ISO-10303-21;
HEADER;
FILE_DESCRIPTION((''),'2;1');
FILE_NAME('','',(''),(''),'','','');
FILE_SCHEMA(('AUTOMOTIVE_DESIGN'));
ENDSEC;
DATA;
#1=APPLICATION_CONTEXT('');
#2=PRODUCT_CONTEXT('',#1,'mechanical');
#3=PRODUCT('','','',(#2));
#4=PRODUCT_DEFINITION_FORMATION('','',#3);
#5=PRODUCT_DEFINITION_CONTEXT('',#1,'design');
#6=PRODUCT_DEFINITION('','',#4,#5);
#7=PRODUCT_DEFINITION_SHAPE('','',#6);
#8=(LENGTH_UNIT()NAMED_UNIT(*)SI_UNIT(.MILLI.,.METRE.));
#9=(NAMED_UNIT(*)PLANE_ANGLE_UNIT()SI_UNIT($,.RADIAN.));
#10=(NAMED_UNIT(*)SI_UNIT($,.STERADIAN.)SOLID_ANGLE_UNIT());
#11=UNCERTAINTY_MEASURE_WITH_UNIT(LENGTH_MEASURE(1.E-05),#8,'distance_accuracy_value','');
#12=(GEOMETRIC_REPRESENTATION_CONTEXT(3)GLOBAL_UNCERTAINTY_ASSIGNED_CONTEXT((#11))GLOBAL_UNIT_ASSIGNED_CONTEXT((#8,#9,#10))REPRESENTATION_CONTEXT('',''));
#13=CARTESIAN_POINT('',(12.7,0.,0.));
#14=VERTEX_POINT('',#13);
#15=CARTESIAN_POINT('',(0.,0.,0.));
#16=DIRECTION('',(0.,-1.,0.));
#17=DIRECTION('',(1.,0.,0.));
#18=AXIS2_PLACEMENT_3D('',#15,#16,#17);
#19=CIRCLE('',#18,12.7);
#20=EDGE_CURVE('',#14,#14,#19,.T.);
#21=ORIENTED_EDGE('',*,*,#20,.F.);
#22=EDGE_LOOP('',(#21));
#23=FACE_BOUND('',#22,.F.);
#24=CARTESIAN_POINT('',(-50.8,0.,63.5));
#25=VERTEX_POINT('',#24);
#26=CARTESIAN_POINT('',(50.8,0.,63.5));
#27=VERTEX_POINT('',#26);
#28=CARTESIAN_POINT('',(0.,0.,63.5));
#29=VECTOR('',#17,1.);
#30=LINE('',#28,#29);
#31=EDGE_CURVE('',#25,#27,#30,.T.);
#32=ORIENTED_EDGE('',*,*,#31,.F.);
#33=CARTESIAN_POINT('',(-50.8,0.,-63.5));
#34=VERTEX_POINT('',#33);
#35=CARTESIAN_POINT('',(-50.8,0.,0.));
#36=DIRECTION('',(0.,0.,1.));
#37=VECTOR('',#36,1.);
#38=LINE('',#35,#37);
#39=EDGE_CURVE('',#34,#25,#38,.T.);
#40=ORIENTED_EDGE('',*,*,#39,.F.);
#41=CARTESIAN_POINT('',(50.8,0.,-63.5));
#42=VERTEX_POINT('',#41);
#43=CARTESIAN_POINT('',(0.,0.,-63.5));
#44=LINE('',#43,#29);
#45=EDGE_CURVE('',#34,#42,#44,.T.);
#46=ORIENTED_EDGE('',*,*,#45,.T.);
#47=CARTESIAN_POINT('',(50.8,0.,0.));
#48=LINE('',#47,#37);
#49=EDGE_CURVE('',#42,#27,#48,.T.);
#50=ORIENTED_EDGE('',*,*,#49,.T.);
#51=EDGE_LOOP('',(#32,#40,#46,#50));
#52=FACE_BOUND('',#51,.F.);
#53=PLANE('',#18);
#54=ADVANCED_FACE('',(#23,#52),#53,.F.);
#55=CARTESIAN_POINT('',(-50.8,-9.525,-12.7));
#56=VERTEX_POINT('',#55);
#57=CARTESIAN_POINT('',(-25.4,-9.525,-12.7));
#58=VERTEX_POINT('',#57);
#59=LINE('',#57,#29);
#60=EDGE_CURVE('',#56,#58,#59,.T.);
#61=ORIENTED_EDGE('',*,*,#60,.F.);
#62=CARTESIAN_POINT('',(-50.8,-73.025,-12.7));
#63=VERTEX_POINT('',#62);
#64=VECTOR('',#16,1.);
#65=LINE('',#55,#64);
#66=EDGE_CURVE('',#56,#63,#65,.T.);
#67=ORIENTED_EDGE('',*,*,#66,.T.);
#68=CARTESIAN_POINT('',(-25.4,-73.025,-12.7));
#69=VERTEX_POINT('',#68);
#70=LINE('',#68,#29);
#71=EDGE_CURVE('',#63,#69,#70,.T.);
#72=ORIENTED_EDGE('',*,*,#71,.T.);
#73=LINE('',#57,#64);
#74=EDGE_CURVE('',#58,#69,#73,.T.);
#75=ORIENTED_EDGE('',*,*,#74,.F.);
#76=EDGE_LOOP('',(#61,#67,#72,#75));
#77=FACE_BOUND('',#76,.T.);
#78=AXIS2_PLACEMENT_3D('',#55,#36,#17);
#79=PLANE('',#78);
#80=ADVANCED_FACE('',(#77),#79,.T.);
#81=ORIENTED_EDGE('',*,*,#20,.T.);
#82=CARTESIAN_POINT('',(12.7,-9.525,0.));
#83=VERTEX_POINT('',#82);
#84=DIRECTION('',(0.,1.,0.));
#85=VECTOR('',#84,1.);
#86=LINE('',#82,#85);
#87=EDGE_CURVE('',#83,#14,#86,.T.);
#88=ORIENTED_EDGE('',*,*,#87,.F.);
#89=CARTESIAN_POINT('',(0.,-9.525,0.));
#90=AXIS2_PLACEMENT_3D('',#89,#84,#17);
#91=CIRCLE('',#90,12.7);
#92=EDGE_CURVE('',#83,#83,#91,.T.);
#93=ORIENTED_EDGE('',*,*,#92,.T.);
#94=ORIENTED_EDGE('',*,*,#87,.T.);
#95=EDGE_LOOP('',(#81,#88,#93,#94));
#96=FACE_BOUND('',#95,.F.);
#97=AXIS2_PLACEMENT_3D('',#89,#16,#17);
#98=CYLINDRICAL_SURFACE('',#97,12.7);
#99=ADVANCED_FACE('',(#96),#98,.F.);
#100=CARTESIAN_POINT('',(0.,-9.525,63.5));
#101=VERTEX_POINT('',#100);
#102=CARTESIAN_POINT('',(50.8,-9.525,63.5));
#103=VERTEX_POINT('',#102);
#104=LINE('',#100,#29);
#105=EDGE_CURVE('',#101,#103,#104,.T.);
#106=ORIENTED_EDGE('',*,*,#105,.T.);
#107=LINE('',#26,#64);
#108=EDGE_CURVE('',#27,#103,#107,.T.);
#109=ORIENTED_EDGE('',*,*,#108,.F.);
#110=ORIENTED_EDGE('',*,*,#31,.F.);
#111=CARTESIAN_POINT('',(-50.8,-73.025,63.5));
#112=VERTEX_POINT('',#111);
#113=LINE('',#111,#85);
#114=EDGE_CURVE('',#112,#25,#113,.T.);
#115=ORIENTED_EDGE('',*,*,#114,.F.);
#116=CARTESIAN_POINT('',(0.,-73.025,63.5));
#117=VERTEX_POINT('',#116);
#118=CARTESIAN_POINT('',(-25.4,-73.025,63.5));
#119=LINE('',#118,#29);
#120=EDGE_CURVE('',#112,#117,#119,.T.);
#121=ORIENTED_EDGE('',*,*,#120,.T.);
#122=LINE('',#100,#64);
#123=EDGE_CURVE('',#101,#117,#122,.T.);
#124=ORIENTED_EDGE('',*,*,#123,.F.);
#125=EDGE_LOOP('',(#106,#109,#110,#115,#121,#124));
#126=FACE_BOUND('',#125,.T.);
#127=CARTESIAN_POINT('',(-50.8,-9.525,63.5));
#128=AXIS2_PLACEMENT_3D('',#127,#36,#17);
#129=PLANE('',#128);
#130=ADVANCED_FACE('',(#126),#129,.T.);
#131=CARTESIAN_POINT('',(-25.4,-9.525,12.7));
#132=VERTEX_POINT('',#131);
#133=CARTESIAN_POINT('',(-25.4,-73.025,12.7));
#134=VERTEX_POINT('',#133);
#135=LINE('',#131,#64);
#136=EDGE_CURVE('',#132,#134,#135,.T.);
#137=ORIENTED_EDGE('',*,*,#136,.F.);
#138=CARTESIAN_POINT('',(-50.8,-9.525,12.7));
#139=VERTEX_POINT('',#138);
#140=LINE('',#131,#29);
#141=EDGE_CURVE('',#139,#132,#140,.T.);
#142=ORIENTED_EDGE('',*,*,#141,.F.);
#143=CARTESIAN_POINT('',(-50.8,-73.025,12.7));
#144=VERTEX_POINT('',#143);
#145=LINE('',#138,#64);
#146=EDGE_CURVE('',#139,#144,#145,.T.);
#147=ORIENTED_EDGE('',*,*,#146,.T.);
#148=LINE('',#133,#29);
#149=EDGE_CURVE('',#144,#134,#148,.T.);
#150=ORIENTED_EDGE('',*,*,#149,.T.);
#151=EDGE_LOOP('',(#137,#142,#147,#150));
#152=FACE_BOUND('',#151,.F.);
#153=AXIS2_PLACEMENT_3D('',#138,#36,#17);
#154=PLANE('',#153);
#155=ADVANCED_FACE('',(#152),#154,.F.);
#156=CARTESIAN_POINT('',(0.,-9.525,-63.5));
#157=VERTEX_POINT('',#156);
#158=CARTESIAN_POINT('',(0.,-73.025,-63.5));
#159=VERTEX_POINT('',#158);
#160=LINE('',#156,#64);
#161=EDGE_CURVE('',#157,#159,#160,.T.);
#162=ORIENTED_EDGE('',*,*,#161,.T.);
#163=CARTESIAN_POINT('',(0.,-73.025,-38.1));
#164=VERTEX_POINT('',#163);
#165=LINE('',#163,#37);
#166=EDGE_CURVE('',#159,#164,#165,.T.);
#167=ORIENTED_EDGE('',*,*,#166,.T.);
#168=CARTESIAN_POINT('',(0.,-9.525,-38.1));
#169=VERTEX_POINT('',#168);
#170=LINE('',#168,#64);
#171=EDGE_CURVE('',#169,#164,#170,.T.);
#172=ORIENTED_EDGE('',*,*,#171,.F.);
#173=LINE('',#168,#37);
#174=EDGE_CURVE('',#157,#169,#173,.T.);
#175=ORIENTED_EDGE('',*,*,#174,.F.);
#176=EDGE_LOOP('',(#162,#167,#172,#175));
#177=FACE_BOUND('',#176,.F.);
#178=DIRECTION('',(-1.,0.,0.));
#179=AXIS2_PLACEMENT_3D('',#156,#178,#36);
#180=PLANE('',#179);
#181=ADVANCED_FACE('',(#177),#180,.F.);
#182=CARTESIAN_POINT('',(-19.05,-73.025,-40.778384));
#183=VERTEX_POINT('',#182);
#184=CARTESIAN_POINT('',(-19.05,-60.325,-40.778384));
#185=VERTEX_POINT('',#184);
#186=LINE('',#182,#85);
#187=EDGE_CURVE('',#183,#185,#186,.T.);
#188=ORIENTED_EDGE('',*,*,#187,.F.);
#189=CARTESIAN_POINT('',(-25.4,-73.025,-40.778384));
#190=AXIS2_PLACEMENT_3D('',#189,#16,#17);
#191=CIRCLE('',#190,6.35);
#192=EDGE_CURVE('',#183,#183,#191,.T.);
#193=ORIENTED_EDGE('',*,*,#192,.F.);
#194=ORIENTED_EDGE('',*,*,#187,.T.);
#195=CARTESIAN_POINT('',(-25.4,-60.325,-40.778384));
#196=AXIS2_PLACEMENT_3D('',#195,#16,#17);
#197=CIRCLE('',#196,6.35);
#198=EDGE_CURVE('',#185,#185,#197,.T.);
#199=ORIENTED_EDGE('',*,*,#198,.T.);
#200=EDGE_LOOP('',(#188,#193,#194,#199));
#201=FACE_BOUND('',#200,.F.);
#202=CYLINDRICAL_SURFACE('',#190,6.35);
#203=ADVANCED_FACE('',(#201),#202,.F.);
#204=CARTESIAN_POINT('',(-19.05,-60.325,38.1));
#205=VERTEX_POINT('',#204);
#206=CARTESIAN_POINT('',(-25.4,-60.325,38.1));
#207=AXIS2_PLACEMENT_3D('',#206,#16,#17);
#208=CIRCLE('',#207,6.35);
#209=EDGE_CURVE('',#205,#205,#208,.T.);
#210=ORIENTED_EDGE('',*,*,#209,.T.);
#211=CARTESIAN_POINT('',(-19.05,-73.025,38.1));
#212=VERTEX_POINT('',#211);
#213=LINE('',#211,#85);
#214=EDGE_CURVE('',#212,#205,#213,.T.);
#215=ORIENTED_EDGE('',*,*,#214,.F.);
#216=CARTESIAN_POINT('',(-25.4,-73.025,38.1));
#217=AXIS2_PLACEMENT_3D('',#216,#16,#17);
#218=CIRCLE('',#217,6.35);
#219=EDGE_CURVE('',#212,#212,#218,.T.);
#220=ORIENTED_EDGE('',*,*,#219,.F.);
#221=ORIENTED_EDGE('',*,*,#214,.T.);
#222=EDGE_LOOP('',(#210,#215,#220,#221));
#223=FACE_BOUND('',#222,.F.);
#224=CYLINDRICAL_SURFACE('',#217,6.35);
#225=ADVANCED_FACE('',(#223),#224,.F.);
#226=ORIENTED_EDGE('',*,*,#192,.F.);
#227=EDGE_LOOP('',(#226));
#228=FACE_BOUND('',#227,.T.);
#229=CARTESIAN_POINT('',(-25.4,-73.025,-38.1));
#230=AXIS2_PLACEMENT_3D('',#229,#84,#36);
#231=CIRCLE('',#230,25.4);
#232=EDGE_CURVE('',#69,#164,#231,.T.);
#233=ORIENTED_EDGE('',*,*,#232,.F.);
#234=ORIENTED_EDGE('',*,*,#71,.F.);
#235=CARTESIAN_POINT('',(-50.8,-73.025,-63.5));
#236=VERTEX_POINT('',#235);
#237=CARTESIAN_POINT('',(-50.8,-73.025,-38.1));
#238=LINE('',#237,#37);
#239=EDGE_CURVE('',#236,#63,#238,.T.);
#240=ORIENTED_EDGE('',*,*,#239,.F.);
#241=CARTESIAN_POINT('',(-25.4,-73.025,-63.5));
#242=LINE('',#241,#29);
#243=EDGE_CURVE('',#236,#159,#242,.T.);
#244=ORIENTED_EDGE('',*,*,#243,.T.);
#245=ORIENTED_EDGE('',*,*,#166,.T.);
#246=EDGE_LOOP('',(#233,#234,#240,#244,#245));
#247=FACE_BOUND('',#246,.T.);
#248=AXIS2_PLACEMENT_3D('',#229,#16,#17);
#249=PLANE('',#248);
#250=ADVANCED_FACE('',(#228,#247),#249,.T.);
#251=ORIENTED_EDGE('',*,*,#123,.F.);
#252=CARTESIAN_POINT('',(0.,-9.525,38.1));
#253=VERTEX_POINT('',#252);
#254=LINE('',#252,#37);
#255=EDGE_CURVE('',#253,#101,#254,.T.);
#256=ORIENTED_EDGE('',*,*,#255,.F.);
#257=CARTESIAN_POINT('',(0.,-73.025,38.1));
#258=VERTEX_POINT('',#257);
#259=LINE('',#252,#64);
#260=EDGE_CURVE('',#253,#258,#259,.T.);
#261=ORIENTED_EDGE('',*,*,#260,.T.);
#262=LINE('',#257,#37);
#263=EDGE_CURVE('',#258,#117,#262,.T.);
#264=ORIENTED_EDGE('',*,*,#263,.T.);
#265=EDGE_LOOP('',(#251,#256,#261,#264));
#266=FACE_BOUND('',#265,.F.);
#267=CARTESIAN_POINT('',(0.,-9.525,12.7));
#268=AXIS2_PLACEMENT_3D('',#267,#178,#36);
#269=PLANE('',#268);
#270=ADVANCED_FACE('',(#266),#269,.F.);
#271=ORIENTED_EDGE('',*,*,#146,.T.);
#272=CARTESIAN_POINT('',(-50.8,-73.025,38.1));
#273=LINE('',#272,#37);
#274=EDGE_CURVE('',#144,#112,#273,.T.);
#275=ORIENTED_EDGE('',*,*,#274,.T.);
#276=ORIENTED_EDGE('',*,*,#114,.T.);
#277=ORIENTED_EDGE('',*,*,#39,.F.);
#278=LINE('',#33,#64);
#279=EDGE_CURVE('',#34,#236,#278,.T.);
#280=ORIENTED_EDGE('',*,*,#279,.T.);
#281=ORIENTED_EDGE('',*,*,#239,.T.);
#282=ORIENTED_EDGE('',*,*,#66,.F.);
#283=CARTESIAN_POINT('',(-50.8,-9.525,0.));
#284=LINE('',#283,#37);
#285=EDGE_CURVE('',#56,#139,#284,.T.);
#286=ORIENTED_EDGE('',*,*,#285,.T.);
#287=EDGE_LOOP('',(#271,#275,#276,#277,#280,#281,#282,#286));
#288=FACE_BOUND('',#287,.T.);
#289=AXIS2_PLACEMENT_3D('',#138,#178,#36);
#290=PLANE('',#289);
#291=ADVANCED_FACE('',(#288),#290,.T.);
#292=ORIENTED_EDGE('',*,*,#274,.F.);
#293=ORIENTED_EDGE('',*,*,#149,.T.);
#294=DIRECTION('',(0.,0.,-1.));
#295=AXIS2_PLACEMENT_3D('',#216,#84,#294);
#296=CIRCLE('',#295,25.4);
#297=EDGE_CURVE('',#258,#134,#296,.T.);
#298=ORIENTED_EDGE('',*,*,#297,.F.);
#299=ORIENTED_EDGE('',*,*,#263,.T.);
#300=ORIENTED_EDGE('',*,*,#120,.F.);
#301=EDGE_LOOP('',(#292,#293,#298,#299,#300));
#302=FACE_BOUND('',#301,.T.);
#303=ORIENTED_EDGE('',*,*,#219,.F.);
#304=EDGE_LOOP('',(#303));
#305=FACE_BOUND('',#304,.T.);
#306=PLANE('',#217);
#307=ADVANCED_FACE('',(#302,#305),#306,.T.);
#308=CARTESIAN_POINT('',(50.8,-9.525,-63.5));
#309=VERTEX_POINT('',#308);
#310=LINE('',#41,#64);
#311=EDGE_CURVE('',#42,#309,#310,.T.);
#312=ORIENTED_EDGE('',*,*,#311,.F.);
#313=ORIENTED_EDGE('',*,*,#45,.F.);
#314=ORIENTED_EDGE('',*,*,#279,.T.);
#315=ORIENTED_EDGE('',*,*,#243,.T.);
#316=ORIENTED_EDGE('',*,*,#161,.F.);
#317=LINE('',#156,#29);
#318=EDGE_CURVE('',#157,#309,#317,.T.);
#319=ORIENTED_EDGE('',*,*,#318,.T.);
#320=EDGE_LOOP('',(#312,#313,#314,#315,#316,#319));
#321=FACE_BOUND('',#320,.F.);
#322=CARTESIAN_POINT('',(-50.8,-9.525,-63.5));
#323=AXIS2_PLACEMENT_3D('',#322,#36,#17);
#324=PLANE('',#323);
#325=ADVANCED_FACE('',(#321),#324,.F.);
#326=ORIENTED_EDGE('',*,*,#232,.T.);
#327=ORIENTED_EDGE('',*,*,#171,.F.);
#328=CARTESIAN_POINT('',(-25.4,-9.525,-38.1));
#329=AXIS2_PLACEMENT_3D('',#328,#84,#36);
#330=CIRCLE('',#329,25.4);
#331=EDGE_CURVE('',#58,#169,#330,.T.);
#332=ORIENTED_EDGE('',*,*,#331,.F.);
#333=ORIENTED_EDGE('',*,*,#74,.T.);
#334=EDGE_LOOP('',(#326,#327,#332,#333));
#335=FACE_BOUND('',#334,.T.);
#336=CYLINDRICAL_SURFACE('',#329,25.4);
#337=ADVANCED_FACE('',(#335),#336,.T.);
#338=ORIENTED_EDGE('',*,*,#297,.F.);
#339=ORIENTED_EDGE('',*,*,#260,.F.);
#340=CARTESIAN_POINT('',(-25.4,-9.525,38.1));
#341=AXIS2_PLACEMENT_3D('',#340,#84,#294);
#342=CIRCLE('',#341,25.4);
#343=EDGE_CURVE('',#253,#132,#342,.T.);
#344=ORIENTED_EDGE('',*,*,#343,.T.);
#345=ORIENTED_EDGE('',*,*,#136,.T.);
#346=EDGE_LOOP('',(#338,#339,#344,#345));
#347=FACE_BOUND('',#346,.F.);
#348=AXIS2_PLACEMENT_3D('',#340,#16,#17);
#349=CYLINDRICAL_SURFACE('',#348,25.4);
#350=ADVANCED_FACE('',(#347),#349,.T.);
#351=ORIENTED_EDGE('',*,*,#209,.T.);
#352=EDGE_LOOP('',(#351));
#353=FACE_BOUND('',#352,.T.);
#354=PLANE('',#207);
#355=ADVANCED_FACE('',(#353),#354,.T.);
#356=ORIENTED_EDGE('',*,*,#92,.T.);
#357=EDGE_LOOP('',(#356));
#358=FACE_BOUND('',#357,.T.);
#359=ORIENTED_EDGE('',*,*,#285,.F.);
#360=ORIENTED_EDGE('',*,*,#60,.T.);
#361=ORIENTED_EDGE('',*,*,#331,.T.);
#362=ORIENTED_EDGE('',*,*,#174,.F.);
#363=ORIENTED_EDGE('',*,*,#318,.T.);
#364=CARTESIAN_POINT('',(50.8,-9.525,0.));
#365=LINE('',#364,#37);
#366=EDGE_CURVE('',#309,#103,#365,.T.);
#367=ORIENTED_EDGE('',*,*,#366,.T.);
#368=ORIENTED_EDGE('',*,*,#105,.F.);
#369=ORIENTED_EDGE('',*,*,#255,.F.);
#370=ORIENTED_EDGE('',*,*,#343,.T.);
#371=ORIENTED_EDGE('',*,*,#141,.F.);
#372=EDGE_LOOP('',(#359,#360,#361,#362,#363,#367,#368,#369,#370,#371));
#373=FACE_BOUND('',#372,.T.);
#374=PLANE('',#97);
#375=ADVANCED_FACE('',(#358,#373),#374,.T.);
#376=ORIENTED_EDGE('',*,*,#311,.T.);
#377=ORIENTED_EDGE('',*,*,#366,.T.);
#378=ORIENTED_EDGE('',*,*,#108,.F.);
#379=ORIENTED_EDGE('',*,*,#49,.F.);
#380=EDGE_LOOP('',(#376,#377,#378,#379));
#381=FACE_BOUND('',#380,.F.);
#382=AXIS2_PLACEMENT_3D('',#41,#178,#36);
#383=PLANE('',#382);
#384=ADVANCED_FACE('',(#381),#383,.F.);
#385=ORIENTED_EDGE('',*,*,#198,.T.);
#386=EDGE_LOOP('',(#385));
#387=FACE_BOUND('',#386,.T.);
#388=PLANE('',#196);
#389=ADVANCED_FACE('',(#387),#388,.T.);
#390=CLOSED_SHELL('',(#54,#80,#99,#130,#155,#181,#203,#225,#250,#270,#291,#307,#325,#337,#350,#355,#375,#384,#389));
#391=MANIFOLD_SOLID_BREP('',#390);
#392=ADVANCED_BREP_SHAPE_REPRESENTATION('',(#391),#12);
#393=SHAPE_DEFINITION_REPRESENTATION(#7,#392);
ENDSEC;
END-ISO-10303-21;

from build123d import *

# Parameters (mm, degrees)
F0_W        = 101.6
F0_H        = 127
F1_DEPTH    = 9.525
F2_R        = 12.7
F3_DEPTH    = 63.5
F4_W        = 50.8
F4_H        = 50.8
F5_DEPTH    = 63.5
F6_W        = 50.8
F6_H        = 50.8
F7_DEPTH    = 63.5
F8_T1_DEPTH = 127
F9_R        = 25.4
F10_R       = 6.35
F11_DEPTH   = 12.7
F12_R       = 6.35
F13_DEPTH   = 12.7


# Not quite as in the source:
# - a fillet or chamfer that OpenCascade refuses, or shapes differently, is made with other operations: its cross-section is extruded or revolved along the edge and cut away or added


with BuildPart() as f1:
    # F0 (on Front) → F1 (new body)
    with BuildSketch(Plane.XZ):
        Rectangle(F0_W, F0_H)
    extrude(amount=F1_DEPTH)

    # F2 (on face) → F3 (cut)
    with BuildSketch(Plane.XZ.offset(9.525)):
        Circle(F2_R)
    extrude(amount=-F3_DEPTH, mode=Mode.SUBTRACT)

    # F4 (on face) → F5 (join)
    with BuildSketch(Plane.XZ.offset(9.525)):
        with Locations((-25.4, -38.1)):
            Rectangle(F4_W, F4_H)
    extrude(amount=F5_DEPTH)

    # F6 (on face) → F7 (join)
    with BuildSketch(Plane.XZ.offset(9.525)):
        with Locations((-25.4, 38.1)):
            Rectangle(F6_W, F6_H)
    extrude(amount=F7_DEPTH)

    # F8: fillet of radius 25.4 on 1 edges, made by hand

    # F8_s2 → F8_t1 (cut)
    with BuildSketch(Plane.XZ.offset(9.525)):
        with BuildLine():
            ThreePointArc((-25.4, -12.7), (-7.4394877579, -20.1394877579), (0, -38.1))
            Line((0, -38.1), (0, -12.7))
            Line((0, -12.7), (-25.4, -12.7))
        make_face()
    extrude(amount=F8_T1_DEPTH, mode=Mode.SUBTRACT)

    # F9
    f9_edges = [f1.edges().sort_by_distance(p)[0] for p in [
        (0, -41.275, 12.7),
    ]]
    fillet(f9_edges, radius=F9_R)

    # F10 (on face) → F11 (cut)
    with BuildSketch(Plane.XZ.offset(73.025)):
        with Locations((-25.4, -40.7783836126)):
            Circle(F10_R)
    extrude(amount=-F11_DEPTH, mode=Mode.SUBTRACT)

    # F12 (on face) → F13 (cut)
    with BuildSketch(Plane.XZ.offset(73.025)):
        with Locations((-25.4, 38.1)):
            Circle(F12_R)
    extrude(amount=-F13_DEPTH, mode=Mode.SUBTRACT)


solid = f1.part
